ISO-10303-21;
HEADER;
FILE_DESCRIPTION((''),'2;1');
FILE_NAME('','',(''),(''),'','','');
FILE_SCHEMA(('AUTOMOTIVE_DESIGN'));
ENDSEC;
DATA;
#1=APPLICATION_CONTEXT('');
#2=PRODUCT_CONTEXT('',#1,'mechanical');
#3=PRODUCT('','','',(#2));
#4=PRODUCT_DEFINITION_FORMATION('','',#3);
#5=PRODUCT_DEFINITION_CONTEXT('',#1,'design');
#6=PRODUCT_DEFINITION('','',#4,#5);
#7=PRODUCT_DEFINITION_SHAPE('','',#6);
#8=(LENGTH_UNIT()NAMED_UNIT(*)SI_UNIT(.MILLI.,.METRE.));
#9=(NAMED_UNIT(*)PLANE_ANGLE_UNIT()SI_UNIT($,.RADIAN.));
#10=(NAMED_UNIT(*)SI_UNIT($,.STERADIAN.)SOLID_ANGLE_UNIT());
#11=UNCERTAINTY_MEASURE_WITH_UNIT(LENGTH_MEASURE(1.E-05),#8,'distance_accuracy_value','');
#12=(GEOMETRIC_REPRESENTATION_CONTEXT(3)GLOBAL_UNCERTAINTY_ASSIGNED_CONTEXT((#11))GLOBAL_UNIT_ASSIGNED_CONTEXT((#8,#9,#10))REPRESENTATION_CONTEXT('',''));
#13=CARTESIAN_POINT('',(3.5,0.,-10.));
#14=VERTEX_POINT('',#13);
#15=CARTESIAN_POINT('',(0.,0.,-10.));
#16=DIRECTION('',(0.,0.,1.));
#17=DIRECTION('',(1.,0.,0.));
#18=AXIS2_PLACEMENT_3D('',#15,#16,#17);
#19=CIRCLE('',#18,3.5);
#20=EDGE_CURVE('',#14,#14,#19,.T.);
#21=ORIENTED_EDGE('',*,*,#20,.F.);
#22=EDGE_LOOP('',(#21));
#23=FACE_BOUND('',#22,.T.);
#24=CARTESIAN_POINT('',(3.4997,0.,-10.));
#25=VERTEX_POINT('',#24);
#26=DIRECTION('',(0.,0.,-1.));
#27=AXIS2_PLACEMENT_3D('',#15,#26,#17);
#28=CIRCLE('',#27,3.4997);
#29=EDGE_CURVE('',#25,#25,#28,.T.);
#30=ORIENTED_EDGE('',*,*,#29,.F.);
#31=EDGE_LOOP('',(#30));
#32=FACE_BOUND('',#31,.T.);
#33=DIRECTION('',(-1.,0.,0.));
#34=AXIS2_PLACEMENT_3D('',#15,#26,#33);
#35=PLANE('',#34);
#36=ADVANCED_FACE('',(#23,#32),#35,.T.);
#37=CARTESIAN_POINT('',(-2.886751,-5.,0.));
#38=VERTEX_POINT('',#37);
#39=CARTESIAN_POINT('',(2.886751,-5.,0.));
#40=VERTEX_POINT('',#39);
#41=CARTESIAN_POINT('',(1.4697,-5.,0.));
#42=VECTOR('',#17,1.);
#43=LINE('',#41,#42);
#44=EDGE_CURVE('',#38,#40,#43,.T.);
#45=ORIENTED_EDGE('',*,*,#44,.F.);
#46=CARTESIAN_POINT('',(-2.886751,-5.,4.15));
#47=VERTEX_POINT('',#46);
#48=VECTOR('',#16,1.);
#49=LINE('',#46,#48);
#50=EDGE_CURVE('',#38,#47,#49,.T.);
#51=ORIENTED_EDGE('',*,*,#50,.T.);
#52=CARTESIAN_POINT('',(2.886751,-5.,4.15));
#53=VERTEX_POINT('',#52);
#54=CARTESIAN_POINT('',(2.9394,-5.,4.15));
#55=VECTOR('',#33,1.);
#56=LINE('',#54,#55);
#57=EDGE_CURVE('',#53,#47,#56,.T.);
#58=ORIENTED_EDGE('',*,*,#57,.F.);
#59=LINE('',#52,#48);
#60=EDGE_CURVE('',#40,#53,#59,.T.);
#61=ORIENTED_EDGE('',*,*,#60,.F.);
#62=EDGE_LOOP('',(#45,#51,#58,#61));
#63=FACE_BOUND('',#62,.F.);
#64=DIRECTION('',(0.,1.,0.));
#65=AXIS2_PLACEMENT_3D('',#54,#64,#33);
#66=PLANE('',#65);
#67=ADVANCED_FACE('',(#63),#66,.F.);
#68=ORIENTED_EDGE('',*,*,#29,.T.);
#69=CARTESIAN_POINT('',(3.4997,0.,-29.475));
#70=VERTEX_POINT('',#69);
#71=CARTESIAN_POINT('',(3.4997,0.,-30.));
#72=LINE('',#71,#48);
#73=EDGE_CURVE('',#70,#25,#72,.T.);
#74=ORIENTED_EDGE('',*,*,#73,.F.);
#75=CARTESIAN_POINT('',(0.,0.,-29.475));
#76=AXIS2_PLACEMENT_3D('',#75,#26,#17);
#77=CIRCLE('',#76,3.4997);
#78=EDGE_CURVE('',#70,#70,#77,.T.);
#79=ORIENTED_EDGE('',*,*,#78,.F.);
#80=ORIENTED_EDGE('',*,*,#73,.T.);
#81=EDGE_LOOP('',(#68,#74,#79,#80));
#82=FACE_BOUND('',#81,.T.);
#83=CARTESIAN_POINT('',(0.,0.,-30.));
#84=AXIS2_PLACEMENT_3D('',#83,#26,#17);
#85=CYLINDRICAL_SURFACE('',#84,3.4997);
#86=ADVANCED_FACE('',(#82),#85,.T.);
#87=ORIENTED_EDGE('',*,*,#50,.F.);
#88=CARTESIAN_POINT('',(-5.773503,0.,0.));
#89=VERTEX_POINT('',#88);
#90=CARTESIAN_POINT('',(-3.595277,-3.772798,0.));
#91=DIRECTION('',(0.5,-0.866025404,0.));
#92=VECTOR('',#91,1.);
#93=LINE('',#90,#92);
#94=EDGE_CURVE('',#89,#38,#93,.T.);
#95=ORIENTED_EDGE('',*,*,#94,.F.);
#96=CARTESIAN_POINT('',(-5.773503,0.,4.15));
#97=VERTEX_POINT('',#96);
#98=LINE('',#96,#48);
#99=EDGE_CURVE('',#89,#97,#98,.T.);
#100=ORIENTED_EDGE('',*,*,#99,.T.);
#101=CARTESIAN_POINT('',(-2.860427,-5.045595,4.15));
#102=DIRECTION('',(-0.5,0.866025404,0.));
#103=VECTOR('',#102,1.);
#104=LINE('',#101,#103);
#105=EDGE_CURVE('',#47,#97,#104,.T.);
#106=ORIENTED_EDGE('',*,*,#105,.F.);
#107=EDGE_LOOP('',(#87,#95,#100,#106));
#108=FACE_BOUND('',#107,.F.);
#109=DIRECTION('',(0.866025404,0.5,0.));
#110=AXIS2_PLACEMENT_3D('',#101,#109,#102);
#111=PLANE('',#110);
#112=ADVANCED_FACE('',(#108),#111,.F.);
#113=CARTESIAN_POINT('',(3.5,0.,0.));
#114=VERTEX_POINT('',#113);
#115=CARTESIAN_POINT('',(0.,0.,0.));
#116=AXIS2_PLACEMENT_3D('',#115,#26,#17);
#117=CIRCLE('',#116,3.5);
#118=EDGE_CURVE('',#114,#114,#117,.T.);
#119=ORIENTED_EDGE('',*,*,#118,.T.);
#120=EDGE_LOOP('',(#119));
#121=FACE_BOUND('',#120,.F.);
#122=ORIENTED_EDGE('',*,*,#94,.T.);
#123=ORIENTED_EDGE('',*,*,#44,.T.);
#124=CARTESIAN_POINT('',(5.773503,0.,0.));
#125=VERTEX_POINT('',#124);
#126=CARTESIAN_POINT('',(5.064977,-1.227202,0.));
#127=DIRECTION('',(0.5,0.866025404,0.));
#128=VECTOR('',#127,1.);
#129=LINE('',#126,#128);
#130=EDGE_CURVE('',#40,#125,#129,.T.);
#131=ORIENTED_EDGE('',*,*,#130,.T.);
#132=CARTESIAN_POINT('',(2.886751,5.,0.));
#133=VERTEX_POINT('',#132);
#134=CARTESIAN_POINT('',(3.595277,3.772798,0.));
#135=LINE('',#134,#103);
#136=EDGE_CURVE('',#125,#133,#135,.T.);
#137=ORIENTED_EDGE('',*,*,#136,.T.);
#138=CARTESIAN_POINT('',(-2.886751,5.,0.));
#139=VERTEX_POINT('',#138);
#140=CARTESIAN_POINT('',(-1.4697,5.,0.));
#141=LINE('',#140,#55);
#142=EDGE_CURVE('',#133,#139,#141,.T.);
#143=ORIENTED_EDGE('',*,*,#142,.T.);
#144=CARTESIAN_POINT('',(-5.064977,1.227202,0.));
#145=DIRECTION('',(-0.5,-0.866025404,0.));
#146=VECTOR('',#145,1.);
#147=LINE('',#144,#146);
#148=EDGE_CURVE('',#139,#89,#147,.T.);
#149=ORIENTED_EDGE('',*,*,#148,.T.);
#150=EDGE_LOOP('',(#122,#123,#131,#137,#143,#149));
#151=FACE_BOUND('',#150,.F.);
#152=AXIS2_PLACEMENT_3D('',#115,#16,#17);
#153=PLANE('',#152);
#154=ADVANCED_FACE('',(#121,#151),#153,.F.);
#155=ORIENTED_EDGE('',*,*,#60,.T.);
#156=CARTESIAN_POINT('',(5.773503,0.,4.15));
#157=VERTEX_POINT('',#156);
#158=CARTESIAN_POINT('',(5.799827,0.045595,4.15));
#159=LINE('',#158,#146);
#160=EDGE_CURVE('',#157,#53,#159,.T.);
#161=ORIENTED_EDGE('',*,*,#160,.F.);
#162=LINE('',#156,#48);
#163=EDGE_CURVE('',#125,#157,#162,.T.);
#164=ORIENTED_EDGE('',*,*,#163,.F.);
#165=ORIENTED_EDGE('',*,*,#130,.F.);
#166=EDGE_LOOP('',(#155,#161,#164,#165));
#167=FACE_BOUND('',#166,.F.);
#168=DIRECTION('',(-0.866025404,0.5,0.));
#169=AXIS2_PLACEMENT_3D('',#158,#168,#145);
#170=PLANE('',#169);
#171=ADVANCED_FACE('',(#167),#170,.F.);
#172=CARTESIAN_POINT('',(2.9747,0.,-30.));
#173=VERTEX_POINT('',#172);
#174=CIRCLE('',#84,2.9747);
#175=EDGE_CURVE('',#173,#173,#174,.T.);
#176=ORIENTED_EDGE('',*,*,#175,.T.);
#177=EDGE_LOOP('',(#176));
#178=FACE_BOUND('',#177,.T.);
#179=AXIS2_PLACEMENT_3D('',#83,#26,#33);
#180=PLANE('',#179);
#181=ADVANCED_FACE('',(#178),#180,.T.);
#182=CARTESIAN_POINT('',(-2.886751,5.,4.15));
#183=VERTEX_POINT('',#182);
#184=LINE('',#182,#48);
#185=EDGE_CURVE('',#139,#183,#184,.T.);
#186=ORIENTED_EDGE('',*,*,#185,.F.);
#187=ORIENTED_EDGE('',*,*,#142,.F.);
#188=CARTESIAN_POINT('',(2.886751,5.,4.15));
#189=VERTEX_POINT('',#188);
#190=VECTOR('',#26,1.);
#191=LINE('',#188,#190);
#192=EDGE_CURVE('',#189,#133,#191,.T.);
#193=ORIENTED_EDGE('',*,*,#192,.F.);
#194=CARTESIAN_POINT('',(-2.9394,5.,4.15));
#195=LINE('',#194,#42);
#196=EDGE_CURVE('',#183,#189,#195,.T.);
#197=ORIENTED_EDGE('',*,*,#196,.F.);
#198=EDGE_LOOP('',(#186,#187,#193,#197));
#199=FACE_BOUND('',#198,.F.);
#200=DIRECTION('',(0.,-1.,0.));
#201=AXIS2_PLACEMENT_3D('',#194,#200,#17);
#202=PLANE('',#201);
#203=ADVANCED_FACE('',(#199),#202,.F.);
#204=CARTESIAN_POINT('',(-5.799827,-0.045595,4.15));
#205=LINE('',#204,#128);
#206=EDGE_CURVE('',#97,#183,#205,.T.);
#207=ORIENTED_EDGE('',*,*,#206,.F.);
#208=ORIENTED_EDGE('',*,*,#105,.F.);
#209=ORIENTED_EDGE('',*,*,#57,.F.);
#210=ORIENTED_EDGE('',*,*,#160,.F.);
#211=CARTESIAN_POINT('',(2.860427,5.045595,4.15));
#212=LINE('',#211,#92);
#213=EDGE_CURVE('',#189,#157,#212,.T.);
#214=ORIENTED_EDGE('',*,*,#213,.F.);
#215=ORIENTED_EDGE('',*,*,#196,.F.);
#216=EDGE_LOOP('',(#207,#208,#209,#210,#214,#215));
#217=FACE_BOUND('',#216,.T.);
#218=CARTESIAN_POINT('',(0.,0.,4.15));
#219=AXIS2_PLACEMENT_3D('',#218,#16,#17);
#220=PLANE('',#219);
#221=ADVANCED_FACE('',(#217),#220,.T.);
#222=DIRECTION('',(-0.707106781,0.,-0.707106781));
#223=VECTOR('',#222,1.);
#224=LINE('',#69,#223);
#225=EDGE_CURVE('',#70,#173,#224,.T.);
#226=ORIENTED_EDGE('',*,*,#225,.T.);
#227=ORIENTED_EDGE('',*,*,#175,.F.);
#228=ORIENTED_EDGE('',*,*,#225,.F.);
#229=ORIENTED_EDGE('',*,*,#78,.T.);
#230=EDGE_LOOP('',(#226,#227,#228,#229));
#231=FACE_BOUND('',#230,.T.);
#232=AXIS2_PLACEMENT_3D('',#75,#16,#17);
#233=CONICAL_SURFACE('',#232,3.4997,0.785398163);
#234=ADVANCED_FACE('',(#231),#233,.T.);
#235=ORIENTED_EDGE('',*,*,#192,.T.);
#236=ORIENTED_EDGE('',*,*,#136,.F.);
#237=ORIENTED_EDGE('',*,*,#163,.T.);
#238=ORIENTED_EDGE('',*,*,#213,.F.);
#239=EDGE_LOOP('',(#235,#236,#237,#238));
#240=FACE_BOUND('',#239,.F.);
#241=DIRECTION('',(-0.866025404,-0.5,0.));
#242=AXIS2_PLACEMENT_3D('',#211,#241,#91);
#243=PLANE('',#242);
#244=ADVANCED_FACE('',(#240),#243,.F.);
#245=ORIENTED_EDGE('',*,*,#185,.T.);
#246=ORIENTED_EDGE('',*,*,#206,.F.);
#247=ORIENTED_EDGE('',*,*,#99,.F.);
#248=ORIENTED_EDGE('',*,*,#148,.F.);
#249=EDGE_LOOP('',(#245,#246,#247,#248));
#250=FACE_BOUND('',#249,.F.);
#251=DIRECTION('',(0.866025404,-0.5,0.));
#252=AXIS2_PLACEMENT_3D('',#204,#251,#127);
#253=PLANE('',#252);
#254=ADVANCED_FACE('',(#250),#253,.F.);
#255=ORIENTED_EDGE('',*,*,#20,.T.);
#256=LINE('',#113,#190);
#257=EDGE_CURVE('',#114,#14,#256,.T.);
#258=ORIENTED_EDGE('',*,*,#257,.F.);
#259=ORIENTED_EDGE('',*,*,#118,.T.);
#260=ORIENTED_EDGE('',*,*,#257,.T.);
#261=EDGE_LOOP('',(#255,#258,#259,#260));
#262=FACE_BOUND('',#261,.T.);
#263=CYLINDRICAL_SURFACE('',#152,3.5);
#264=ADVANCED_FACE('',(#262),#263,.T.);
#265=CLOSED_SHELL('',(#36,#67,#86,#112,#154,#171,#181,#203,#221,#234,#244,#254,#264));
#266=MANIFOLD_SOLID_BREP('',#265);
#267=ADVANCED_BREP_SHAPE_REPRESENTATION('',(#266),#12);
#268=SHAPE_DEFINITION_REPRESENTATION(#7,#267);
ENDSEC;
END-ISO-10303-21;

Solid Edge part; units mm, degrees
sketch "Sketch1" plane through (0, 0, 0) normal (0, 0, 1) x (1, 0, 0)
  circle A0 centre (0, 0) radius 5.8
  dimension "D1" = 11.6
extrude "Protrusion1" add sketch "Sketch1" along normal blind 4.15
sketch "Sketch2" plane through (0, 0, 0) normal (0, 0, -1) x (1, 0, 0)
  circle A0 centre (0, 0) radius 3.5
extrude "Protrusion2" add sketch "Sketch2" along normal blind 30
sketch "Sketch3" plane through (0, 0, -30) normal (0, 0, -1) x (1, 0, 0)
  circle A0 centre (0, 0) radius 3.4997
extrude "Cutout1" cut sketch "Sketch3" against normal blind 20 flip side to cut
chamfer "Chamfer_1" distance 0.525 angle 45 1 edges at (-3.4997, 0, -30)
sketch "Sketch4" plane through (0, 0, 4.15) normal (0, 0, 1) x (1, 0, 0)
  line L0 (-2.9394, 5) -> (2.9394, 5)
  dimension "D1" = 10
extrude "Cutout2" cut sketch "Sketch4" against normal up to next material side at (0, 5.05, 4.15)
pattern_circular "Pattern1" count 6 over 360 about axis through (0, 0, 4.15) along (0, 0, 1) of "Cutout2"
properties part number "24100757"
